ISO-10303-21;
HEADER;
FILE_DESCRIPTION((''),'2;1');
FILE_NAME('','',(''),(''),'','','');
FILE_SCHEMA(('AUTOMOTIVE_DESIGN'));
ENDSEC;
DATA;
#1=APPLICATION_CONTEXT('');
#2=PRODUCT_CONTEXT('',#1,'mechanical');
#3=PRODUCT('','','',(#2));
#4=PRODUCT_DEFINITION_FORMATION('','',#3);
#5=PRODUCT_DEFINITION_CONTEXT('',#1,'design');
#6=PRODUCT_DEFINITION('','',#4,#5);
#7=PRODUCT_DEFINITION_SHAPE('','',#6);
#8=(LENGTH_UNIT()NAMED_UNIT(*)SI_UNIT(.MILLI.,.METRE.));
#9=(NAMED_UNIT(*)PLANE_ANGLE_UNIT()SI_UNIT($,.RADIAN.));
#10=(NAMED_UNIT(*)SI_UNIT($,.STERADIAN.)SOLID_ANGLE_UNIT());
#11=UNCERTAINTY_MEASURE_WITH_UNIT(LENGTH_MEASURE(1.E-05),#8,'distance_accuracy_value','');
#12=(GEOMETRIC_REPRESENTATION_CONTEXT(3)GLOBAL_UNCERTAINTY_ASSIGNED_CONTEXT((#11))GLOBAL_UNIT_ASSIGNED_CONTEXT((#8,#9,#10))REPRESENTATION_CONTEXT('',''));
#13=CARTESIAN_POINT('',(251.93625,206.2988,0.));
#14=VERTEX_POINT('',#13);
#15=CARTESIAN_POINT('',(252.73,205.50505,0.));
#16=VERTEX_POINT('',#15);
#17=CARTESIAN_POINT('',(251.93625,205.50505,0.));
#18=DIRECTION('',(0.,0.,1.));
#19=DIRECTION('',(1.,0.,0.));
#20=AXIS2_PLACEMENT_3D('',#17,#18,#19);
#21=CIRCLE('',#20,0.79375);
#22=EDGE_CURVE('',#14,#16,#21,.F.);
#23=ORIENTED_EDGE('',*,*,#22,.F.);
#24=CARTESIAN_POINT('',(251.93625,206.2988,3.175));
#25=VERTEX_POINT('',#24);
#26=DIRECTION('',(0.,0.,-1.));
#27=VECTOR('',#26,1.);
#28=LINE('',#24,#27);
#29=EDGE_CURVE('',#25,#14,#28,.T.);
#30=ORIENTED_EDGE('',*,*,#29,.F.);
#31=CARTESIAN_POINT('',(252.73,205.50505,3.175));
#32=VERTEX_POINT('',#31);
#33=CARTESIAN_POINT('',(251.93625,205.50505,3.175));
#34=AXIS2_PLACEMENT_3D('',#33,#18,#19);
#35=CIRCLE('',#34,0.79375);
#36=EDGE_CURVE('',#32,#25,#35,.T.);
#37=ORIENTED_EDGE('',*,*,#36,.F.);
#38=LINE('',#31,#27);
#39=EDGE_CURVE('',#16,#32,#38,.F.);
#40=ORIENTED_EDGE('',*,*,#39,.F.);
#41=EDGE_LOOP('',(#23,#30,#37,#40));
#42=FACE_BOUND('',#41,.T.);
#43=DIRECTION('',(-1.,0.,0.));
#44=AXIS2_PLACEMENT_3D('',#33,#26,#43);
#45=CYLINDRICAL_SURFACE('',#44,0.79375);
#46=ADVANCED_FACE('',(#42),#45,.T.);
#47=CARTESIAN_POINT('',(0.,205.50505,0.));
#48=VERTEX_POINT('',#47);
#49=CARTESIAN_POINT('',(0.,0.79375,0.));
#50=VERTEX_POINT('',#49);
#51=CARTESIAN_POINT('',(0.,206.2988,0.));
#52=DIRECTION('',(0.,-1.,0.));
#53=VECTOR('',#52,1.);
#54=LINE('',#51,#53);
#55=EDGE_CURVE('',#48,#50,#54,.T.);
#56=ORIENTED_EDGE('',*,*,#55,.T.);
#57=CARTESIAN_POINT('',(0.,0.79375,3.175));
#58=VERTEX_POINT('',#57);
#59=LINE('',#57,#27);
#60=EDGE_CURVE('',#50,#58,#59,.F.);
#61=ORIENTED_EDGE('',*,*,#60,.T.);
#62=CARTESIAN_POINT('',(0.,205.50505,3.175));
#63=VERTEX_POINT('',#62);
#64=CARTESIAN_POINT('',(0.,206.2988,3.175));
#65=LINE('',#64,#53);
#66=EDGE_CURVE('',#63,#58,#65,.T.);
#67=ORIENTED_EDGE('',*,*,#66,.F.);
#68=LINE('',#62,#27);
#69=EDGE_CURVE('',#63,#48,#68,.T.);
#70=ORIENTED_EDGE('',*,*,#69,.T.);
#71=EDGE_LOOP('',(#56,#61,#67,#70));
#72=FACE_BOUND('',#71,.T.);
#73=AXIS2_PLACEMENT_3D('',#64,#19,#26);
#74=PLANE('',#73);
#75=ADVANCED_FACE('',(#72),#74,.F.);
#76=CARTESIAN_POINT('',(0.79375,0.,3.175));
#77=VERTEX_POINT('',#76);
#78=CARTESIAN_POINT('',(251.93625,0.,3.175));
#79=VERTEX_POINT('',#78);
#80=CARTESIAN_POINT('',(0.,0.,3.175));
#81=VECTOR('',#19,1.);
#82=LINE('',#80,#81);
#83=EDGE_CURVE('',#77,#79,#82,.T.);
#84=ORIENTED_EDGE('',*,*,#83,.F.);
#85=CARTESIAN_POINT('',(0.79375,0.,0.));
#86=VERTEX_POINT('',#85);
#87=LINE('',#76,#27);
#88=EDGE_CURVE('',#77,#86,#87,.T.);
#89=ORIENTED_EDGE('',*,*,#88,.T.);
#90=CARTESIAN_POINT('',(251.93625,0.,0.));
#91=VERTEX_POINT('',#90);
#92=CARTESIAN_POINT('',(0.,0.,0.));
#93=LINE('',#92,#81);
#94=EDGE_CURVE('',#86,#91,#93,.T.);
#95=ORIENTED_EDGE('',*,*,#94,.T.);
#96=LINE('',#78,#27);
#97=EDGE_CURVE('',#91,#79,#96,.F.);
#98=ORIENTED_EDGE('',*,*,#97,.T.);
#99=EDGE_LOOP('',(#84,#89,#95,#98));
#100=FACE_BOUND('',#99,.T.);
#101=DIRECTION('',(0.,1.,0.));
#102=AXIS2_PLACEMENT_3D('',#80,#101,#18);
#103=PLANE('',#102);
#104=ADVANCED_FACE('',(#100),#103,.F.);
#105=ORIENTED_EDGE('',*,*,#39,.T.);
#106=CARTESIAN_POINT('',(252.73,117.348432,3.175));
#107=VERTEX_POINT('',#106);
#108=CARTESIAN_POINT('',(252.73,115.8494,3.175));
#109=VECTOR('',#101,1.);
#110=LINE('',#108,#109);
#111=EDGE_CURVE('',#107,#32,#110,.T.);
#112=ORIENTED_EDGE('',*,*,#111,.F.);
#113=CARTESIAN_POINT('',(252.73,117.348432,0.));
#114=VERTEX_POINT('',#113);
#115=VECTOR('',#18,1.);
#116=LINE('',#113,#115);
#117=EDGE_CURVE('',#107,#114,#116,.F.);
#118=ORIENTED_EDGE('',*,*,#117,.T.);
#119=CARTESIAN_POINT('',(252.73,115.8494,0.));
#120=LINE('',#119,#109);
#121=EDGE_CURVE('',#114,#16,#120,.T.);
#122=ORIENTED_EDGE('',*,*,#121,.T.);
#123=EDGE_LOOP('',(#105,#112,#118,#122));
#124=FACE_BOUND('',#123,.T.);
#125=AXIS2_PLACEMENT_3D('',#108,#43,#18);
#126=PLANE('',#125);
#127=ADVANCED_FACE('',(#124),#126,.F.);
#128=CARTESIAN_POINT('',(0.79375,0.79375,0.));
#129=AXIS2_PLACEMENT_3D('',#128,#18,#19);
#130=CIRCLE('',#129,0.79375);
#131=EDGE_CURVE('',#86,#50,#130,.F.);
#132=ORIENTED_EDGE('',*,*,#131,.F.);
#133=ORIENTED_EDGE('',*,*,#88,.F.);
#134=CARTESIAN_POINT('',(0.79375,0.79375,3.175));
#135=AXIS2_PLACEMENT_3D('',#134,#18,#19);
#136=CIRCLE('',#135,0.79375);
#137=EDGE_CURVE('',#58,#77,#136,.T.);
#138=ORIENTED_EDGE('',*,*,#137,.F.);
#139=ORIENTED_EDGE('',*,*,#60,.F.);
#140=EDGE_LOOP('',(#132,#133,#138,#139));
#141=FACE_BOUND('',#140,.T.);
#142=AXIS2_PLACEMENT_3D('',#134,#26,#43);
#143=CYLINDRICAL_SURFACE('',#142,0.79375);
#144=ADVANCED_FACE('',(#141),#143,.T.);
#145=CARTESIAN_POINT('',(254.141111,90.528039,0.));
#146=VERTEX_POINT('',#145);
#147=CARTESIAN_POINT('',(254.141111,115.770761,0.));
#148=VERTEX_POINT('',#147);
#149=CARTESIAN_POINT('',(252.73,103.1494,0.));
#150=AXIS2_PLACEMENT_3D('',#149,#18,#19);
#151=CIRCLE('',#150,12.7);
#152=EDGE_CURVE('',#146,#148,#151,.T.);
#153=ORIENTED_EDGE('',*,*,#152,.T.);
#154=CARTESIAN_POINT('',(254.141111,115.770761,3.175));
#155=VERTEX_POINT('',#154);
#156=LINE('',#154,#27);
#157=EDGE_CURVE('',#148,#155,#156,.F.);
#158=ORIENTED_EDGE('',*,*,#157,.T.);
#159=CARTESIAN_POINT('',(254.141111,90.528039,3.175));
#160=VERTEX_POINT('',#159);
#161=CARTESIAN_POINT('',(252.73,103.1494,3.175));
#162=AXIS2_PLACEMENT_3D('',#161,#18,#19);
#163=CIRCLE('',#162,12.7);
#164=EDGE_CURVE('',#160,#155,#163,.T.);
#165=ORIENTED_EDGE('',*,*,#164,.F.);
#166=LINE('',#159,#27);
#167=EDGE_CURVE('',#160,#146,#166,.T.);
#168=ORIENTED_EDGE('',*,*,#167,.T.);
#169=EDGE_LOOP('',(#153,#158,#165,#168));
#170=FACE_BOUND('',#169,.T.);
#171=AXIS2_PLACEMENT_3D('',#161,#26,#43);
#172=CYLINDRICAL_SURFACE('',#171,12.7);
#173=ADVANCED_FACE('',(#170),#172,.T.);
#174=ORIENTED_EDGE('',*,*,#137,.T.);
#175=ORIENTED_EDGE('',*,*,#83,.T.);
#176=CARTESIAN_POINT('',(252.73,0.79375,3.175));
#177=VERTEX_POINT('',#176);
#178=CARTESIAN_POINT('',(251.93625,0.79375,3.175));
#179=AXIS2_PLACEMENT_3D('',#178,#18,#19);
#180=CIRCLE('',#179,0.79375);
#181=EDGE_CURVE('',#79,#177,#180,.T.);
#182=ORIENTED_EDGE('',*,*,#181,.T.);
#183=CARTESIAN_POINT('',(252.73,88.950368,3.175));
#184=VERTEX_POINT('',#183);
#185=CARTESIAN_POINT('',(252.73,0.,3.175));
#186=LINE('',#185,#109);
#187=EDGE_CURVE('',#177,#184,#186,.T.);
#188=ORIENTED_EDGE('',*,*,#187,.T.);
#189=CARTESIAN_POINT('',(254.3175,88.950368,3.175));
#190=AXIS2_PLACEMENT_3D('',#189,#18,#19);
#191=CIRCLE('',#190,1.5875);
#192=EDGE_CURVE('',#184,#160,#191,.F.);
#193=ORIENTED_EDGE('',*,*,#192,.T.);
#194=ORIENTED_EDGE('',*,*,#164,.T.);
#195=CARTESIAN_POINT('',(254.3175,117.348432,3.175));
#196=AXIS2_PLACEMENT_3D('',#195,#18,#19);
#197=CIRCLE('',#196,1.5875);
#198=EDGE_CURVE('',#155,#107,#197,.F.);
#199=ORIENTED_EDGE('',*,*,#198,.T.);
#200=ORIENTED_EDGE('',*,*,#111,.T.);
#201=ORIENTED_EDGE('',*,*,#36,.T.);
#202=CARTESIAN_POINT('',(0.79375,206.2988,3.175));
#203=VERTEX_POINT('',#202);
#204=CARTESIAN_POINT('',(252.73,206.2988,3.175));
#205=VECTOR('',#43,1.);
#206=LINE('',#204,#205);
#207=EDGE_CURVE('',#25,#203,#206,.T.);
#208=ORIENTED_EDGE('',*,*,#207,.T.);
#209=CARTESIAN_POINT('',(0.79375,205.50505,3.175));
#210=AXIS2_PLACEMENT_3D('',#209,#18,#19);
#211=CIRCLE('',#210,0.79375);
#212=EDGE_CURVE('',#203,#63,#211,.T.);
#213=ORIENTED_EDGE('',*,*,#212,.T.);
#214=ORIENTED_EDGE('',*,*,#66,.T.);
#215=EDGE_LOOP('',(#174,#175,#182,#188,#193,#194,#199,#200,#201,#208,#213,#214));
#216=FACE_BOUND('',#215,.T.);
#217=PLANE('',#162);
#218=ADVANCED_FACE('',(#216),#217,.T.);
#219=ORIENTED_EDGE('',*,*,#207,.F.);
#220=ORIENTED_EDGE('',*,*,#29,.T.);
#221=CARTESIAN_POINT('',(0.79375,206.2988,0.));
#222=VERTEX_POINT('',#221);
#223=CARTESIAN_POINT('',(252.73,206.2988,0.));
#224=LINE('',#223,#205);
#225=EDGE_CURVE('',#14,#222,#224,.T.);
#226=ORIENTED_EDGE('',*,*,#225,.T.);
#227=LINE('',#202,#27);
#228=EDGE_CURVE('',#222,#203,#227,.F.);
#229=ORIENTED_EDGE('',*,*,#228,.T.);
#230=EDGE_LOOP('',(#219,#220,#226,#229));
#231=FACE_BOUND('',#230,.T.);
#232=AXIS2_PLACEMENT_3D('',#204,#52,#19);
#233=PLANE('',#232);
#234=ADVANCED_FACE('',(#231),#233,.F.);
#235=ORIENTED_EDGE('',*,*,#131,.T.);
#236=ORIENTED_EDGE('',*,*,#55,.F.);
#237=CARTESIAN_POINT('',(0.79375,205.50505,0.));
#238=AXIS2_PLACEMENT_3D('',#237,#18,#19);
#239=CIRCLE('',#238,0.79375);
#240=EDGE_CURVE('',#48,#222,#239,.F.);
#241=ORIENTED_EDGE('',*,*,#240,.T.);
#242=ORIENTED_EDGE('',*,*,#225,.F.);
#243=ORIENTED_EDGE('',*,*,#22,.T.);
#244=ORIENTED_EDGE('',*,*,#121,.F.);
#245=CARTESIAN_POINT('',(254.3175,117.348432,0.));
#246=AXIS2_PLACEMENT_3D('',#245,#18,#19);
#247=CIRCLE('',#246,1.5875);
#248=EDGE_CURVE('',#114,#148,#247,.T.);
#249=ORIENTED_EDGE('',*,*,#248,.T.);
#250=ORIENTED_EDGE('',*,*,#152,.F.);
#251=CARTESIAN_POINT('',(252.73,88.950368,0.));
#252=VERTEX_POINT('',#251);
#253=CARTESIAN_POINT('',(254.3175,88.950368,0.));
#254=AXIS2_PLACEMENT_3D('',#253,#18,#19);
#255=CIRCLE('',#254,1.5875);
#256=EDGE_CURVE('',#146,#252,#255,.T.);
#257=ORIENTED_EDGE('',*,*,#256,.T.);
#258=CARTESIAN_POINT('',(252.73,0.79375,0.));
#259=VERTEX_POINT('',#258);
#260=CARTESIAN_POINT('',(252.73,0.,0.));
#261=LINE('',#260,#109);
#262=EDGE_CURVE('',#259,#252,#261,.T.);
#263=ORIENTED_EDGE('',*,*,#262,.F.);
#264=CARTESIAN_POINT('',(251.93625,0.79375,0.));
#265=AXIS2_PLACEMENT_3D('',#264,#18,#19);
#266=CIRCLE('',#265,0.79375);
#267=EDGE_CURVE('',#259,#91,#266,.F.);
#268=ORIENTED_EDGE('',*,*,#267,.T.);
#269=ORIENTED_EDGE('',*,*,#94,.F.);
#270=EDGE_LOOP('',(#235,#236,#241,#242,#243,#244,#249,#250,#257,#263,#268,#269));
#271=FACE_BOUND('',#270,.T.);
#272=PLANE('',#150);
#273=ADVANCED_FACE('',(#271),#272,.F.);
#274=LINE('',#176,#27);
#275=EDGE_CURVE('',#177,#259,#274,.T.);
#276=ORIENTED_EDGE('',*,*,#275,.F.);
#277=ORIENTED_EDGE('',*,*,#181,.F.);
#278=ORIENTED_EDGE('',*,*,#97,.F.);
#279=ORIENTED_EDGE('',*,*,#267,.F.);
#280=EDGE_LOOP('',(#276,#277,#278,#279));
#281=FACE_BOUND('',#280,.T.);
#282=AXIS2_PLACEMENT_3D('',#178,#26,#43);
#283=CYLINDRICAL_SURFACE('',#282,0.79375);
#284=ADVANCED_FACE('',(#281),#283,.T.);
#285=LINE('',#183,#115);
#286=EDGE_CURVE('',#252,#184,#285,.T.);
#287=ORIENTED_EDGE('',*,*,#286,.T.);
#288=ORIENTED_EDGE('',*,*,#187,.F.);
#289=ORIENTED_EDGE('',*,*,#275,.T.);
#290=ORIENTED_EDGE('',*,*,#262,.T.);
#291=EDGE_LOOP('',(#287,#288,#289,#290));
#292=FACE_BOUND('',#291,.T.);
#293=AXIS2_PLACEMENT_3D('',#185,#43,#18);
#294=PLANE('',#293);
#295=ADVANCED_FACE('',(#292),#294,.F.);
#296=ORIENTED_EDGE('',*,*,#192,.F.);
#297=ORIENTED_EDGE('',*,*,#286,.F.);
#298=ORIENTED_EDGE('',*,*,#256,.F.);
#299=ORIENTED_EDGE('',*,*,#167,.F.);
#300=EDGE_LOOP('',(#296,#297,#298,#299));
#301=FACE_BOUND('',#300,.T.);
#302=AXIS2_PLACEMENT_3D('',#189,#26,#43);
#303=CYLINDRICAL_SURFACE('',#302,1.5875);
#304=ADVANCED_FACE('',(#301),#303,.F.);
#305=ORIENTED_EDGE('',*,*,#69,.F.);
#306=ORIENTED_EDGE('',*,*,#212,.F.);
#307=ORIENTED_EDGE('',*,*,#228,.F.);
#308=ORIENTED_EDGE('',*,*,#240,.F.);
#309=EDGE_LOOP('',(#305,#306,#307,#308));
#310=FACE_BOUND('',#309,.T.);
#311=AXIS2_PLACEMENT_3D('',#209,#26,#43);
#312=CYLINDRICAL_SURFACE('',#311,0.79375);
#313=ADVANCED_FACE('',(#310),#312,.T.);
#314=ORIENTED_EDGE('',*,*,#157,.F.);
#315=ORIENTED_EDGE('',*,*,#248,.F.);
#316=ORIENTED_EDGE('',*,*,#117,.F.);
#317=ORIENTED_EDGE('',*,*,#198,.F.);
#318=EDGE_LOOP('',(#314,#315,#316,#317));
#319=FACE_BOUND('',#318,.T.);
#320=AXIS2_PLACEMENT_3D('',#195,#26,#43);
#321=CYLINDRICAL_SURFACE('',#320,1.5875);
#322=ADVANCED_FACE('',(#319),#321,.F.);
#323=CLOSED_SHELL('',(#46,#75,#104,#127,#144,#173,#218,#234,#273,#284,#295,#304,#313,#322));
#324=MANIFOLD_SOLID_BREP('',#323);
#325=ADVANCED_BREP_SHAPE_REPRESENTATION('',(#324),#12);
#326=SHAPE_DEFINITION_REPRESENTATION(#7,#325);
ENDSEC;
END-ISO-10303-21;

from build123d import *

# Parameters (mm, degrees)
BOSS_EXTRUDE1_DEPTH = 3.175
FILLET1_R           = 0.79375
FILLET2_R           = 1.5875


# Read off the part's stored shape, not the designer's step: Boss-Extrude1
with BuildPart() as part:
    # Boss-Extrude1 outline → Boss-Extrude1 (new body)
    with BuildSketch(Plane.XY):
        with BuildLine():
            ThreePointArc((252.73, 90.4494), (265.43, 103.1494), (252.73, 115.8494))
            Line((252.73, 115.8494), (252.73, 206.2988))
            Line((252.73, 206.2988), (0, 206.2988))
            Line((0, 206.2988), (0, 0))
            Line((0, 0), (252.73, 0))
            Line((252.73, 0), (252.73, 90.4494))
        make_face()
    extrude(amount=BOSS_EXTRUDE1_DEPTH)

    # Fillet1
    fillet1_edges = [part.edges().sort_by_distance(p)[0] for p in [
        (252.73, 0, 1.5875),
        (0, 0, 1.5875),
        (0, 206.2988, 1.5875),
        (252.73, 206.2988, 1.5875),
    ]]
    fillet(fillet1_edges, radius=FILLET1_R)

    # Fillet2
    fillet2_edges = [part.edges().sort_by_distance(p)[0] for p in [
        (252.73, 90.4494, 1.5875),
        (252.73, 115.8494, 1.5875),
    ]]
    fillet(fillet2_edges, radius=FILLET2_R)


solid = part.part
